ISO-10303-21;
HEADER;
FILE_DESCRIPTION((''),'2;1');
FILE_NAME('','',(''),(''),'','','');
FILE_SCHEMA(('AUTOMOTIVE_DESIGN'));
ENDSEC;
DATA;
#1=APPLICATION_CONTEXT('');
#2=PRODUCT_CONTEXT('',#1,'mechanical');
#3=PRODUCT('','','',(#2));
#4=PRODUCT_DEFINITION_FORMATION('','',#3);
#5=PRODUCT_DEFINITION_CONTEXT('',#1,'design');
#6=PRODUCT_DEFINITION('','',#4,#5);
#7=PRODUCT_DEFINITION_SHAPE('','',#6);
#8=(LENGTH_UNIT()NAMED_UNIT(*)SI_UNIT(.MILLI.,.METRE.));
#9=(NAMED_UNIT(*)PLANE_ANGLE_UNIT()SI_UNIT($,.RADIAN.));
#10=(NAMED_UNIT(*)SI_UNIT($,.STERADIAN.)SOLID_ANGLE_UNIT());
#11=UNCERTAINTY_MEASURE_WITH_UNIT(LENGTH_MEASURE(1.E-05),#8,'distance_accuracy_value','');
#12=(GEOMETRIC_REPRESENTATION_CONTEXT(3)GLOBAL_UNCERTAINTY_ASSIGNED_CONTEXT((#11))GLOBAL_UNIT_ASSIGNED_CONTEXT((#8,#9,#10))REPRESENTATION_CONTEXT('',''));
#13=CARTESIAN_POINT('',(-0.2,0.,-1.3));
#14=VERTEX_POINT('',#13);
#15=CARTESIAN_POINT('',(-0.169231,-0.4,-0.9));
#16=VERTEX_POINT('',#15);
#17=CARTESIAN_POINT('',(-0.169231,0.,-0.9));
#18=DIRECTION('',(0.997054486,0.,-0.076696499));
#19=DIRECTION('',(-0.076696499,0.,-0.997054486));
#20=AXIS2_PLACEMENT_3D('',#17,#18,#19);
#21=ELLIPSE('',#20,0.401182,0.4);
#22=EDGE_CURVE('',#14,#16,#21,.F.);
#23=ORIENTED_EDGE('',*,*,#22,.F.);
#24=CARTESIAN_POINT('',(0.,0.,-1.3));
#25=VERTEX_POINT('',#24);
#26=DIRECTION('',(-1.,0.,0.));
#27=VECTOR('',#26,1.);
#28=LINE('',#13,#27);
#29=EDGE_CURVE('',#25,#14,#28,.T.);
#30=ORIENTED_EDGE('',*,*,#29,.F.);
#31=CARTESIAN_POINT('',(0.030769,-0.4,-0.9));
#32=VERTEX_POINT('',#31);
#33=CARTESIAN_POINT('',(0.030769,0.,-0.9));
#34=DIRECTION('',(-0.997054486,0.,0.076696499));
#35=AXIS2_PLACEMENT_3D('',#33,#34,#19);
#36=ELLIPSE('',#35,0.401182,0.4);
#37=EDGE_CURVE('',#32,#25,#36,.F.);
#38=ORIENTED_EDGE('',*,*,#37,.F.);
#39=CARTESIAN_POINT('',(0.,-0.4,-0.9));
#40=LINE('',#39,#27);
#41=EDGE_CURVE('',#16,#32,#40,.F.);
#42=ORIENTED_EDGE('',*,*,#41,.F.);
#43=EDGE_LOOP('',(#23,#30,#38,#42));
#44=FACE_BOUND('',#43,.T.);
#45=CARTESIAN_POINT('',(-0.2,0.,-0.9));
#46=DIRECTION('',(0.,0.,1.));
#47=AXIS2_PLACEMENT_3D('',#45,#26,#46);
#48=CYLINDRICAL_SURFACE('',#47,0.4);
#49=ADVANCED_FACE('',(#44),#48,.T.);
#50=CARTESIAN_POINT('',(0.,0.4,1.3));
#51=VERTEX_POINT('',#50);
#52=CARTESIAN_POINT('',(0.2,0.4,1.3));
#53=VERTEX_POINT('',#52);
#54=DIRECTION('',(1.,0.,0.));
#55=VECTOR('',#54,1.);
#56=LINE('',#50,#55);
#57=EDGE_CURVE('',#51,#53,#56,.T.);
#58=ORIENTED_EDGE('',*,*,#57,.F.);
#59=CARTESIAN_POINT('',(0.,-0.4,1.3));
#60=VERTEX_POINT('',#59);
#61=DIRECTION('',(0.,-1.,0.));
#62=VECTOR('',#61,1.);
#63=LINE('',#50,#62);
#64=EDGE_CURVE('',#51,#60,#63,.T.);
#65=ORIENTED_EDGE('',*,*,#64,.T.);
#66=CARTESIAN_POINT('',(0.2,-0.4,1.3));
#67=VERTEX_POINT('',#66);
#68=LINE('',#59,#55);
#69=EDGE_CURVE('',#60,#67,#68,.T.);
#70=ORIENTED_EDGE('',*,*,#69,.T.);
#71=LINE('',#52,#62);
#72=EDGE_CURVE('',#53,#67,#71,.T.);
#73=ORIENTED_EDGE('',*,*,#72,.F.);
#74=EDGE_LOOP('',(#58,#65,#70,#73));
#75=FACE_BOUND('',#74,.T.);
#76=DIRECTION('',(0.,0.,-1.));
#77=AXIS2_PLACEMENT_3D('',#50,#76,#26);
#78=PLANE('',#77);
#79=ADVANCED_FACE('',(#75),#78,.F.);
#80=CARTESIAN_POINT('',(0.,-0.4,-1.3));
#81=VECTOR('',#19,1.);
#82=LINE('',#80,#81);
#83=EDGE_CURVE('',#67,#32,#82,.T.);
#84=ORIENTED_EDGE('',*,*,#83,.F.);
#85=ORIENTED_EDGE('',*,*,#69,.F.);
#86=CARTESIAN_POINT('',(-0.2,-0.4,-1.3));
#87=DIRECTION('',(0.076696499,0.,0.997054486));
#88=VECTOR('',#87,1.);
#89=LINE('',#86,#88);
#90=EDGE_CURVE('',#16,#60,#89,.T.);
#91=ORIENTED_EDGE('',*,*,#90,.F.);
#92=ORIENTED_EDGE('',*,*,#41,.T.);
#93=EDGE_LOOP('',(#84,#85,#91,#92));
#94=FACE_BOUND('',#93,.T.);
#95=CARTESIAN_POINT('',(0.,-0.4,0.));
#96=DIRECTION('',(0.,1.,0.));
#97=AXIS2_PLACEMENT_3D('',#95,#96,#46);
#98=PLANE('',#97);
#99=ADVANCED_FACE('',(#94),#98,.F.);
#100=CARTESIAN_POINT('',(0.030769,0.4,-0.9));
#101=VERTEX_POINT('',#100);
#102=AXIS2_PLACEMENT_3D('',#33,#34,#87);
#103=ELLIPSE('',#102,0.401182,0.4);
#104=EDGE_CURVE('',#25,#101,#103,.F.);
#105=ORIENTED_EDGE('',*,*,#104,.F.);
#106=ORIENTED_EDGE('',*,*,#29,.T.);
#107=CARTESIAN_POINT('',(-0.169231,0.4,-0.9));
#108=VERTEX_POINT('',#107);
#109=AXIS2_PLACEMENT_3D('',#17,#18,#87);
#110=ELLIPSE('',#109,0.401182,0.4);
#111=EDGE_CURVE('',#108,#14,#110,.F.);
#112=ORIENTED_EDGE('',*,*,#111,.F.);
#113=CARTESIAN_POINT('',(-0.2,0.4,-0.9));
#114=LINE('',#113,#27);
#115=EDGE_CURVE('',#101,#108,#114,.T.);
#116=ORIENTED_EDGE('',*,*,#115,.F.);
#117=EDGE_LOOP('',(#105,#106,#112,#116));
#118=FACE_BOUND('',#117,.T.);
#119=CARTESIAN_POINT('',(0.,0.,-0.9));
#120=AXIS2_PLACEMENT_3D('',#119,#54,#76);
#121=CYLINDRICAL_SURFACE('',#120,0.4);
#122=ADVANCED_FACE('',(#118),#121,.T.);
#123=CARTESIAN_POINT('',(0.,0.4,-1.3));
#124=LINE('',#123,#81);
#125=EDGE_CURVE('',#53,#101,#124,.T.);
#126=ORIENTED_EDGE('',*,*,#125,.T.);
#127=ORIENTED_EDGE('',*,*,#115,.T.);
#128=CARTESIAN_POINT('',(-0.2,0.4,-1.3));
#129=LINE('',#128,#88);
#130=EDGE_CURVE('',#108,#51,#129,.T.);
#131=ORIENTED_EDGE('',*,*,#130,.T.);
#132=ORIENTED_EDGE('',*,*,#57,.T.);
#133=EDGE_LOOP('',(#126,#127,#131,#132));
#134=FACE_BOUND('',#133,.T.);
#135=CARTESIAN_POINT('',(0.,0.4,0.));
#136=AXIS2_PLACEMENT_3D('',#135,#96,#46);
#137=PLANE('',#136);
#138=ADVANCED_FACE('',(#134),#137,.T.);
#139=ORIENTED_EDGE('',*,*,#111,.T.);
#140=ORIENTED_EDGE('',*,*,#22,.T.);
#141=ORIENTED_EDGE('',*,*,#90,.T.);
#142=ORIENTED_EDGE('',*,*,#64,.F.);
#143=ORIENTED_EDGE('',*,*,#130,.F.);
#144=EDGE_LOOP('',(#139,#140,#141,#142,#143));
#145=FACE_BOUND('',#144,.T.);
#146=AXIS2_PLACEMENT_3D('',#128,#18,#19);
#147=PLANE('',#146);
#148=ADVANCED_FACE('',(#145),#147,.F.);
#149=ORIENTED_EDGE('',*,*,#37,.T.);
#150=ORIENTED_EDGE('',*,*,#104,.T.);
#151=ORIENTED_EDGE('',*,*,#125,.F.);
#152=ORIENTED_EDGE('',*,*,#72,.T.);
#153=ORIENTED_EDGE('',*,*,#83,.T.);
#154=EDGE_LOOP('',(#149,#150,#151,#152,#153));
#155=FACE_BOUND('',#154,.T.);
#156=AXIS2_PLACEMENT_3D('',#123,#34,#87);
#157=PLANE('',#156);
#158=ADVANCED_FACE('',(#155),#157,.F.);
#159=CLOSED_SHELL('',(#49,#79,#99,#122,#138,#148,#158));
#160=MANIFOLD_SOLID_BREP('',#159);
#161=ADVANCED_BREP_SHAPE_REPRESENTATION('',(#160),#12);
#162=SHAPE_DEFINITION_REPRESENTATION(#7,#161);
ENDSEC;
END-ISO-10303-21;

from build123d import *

# Parameters (mm, degrees)
BOSS_EXTRUDE1_DEPTH = 0.4
FILLET1_R           = 0.4


with BuildPart() as part:
    # Sketch1 → Boss-Extrude1 (new, symmetric)
    with BuildSketch(Plane(origin=(0, 0, 0), x_dir=(1, 0, 0), z_dir=(0, 1, 0))):
        Polygon((-0.2, 1.3), (0, 1.3), (0.2, -1.3), (0, -1.3), align=None)
    extrude(amount=BOSS_EXTRUDE1_DEPTH, both=True)

    # Fillet1
    fillet1_edges = [part.edges().sort_by_distance(p)[0] for p in [
        (-0.1, 0.4, -1.3),
        (-0.1, -0.4, -1.3),
    ]]
    fillet(fillet1_edges, radius=FILLET1_R - 0.0001)  # a hair under: the kernel refuses the full size


solid = part.part
